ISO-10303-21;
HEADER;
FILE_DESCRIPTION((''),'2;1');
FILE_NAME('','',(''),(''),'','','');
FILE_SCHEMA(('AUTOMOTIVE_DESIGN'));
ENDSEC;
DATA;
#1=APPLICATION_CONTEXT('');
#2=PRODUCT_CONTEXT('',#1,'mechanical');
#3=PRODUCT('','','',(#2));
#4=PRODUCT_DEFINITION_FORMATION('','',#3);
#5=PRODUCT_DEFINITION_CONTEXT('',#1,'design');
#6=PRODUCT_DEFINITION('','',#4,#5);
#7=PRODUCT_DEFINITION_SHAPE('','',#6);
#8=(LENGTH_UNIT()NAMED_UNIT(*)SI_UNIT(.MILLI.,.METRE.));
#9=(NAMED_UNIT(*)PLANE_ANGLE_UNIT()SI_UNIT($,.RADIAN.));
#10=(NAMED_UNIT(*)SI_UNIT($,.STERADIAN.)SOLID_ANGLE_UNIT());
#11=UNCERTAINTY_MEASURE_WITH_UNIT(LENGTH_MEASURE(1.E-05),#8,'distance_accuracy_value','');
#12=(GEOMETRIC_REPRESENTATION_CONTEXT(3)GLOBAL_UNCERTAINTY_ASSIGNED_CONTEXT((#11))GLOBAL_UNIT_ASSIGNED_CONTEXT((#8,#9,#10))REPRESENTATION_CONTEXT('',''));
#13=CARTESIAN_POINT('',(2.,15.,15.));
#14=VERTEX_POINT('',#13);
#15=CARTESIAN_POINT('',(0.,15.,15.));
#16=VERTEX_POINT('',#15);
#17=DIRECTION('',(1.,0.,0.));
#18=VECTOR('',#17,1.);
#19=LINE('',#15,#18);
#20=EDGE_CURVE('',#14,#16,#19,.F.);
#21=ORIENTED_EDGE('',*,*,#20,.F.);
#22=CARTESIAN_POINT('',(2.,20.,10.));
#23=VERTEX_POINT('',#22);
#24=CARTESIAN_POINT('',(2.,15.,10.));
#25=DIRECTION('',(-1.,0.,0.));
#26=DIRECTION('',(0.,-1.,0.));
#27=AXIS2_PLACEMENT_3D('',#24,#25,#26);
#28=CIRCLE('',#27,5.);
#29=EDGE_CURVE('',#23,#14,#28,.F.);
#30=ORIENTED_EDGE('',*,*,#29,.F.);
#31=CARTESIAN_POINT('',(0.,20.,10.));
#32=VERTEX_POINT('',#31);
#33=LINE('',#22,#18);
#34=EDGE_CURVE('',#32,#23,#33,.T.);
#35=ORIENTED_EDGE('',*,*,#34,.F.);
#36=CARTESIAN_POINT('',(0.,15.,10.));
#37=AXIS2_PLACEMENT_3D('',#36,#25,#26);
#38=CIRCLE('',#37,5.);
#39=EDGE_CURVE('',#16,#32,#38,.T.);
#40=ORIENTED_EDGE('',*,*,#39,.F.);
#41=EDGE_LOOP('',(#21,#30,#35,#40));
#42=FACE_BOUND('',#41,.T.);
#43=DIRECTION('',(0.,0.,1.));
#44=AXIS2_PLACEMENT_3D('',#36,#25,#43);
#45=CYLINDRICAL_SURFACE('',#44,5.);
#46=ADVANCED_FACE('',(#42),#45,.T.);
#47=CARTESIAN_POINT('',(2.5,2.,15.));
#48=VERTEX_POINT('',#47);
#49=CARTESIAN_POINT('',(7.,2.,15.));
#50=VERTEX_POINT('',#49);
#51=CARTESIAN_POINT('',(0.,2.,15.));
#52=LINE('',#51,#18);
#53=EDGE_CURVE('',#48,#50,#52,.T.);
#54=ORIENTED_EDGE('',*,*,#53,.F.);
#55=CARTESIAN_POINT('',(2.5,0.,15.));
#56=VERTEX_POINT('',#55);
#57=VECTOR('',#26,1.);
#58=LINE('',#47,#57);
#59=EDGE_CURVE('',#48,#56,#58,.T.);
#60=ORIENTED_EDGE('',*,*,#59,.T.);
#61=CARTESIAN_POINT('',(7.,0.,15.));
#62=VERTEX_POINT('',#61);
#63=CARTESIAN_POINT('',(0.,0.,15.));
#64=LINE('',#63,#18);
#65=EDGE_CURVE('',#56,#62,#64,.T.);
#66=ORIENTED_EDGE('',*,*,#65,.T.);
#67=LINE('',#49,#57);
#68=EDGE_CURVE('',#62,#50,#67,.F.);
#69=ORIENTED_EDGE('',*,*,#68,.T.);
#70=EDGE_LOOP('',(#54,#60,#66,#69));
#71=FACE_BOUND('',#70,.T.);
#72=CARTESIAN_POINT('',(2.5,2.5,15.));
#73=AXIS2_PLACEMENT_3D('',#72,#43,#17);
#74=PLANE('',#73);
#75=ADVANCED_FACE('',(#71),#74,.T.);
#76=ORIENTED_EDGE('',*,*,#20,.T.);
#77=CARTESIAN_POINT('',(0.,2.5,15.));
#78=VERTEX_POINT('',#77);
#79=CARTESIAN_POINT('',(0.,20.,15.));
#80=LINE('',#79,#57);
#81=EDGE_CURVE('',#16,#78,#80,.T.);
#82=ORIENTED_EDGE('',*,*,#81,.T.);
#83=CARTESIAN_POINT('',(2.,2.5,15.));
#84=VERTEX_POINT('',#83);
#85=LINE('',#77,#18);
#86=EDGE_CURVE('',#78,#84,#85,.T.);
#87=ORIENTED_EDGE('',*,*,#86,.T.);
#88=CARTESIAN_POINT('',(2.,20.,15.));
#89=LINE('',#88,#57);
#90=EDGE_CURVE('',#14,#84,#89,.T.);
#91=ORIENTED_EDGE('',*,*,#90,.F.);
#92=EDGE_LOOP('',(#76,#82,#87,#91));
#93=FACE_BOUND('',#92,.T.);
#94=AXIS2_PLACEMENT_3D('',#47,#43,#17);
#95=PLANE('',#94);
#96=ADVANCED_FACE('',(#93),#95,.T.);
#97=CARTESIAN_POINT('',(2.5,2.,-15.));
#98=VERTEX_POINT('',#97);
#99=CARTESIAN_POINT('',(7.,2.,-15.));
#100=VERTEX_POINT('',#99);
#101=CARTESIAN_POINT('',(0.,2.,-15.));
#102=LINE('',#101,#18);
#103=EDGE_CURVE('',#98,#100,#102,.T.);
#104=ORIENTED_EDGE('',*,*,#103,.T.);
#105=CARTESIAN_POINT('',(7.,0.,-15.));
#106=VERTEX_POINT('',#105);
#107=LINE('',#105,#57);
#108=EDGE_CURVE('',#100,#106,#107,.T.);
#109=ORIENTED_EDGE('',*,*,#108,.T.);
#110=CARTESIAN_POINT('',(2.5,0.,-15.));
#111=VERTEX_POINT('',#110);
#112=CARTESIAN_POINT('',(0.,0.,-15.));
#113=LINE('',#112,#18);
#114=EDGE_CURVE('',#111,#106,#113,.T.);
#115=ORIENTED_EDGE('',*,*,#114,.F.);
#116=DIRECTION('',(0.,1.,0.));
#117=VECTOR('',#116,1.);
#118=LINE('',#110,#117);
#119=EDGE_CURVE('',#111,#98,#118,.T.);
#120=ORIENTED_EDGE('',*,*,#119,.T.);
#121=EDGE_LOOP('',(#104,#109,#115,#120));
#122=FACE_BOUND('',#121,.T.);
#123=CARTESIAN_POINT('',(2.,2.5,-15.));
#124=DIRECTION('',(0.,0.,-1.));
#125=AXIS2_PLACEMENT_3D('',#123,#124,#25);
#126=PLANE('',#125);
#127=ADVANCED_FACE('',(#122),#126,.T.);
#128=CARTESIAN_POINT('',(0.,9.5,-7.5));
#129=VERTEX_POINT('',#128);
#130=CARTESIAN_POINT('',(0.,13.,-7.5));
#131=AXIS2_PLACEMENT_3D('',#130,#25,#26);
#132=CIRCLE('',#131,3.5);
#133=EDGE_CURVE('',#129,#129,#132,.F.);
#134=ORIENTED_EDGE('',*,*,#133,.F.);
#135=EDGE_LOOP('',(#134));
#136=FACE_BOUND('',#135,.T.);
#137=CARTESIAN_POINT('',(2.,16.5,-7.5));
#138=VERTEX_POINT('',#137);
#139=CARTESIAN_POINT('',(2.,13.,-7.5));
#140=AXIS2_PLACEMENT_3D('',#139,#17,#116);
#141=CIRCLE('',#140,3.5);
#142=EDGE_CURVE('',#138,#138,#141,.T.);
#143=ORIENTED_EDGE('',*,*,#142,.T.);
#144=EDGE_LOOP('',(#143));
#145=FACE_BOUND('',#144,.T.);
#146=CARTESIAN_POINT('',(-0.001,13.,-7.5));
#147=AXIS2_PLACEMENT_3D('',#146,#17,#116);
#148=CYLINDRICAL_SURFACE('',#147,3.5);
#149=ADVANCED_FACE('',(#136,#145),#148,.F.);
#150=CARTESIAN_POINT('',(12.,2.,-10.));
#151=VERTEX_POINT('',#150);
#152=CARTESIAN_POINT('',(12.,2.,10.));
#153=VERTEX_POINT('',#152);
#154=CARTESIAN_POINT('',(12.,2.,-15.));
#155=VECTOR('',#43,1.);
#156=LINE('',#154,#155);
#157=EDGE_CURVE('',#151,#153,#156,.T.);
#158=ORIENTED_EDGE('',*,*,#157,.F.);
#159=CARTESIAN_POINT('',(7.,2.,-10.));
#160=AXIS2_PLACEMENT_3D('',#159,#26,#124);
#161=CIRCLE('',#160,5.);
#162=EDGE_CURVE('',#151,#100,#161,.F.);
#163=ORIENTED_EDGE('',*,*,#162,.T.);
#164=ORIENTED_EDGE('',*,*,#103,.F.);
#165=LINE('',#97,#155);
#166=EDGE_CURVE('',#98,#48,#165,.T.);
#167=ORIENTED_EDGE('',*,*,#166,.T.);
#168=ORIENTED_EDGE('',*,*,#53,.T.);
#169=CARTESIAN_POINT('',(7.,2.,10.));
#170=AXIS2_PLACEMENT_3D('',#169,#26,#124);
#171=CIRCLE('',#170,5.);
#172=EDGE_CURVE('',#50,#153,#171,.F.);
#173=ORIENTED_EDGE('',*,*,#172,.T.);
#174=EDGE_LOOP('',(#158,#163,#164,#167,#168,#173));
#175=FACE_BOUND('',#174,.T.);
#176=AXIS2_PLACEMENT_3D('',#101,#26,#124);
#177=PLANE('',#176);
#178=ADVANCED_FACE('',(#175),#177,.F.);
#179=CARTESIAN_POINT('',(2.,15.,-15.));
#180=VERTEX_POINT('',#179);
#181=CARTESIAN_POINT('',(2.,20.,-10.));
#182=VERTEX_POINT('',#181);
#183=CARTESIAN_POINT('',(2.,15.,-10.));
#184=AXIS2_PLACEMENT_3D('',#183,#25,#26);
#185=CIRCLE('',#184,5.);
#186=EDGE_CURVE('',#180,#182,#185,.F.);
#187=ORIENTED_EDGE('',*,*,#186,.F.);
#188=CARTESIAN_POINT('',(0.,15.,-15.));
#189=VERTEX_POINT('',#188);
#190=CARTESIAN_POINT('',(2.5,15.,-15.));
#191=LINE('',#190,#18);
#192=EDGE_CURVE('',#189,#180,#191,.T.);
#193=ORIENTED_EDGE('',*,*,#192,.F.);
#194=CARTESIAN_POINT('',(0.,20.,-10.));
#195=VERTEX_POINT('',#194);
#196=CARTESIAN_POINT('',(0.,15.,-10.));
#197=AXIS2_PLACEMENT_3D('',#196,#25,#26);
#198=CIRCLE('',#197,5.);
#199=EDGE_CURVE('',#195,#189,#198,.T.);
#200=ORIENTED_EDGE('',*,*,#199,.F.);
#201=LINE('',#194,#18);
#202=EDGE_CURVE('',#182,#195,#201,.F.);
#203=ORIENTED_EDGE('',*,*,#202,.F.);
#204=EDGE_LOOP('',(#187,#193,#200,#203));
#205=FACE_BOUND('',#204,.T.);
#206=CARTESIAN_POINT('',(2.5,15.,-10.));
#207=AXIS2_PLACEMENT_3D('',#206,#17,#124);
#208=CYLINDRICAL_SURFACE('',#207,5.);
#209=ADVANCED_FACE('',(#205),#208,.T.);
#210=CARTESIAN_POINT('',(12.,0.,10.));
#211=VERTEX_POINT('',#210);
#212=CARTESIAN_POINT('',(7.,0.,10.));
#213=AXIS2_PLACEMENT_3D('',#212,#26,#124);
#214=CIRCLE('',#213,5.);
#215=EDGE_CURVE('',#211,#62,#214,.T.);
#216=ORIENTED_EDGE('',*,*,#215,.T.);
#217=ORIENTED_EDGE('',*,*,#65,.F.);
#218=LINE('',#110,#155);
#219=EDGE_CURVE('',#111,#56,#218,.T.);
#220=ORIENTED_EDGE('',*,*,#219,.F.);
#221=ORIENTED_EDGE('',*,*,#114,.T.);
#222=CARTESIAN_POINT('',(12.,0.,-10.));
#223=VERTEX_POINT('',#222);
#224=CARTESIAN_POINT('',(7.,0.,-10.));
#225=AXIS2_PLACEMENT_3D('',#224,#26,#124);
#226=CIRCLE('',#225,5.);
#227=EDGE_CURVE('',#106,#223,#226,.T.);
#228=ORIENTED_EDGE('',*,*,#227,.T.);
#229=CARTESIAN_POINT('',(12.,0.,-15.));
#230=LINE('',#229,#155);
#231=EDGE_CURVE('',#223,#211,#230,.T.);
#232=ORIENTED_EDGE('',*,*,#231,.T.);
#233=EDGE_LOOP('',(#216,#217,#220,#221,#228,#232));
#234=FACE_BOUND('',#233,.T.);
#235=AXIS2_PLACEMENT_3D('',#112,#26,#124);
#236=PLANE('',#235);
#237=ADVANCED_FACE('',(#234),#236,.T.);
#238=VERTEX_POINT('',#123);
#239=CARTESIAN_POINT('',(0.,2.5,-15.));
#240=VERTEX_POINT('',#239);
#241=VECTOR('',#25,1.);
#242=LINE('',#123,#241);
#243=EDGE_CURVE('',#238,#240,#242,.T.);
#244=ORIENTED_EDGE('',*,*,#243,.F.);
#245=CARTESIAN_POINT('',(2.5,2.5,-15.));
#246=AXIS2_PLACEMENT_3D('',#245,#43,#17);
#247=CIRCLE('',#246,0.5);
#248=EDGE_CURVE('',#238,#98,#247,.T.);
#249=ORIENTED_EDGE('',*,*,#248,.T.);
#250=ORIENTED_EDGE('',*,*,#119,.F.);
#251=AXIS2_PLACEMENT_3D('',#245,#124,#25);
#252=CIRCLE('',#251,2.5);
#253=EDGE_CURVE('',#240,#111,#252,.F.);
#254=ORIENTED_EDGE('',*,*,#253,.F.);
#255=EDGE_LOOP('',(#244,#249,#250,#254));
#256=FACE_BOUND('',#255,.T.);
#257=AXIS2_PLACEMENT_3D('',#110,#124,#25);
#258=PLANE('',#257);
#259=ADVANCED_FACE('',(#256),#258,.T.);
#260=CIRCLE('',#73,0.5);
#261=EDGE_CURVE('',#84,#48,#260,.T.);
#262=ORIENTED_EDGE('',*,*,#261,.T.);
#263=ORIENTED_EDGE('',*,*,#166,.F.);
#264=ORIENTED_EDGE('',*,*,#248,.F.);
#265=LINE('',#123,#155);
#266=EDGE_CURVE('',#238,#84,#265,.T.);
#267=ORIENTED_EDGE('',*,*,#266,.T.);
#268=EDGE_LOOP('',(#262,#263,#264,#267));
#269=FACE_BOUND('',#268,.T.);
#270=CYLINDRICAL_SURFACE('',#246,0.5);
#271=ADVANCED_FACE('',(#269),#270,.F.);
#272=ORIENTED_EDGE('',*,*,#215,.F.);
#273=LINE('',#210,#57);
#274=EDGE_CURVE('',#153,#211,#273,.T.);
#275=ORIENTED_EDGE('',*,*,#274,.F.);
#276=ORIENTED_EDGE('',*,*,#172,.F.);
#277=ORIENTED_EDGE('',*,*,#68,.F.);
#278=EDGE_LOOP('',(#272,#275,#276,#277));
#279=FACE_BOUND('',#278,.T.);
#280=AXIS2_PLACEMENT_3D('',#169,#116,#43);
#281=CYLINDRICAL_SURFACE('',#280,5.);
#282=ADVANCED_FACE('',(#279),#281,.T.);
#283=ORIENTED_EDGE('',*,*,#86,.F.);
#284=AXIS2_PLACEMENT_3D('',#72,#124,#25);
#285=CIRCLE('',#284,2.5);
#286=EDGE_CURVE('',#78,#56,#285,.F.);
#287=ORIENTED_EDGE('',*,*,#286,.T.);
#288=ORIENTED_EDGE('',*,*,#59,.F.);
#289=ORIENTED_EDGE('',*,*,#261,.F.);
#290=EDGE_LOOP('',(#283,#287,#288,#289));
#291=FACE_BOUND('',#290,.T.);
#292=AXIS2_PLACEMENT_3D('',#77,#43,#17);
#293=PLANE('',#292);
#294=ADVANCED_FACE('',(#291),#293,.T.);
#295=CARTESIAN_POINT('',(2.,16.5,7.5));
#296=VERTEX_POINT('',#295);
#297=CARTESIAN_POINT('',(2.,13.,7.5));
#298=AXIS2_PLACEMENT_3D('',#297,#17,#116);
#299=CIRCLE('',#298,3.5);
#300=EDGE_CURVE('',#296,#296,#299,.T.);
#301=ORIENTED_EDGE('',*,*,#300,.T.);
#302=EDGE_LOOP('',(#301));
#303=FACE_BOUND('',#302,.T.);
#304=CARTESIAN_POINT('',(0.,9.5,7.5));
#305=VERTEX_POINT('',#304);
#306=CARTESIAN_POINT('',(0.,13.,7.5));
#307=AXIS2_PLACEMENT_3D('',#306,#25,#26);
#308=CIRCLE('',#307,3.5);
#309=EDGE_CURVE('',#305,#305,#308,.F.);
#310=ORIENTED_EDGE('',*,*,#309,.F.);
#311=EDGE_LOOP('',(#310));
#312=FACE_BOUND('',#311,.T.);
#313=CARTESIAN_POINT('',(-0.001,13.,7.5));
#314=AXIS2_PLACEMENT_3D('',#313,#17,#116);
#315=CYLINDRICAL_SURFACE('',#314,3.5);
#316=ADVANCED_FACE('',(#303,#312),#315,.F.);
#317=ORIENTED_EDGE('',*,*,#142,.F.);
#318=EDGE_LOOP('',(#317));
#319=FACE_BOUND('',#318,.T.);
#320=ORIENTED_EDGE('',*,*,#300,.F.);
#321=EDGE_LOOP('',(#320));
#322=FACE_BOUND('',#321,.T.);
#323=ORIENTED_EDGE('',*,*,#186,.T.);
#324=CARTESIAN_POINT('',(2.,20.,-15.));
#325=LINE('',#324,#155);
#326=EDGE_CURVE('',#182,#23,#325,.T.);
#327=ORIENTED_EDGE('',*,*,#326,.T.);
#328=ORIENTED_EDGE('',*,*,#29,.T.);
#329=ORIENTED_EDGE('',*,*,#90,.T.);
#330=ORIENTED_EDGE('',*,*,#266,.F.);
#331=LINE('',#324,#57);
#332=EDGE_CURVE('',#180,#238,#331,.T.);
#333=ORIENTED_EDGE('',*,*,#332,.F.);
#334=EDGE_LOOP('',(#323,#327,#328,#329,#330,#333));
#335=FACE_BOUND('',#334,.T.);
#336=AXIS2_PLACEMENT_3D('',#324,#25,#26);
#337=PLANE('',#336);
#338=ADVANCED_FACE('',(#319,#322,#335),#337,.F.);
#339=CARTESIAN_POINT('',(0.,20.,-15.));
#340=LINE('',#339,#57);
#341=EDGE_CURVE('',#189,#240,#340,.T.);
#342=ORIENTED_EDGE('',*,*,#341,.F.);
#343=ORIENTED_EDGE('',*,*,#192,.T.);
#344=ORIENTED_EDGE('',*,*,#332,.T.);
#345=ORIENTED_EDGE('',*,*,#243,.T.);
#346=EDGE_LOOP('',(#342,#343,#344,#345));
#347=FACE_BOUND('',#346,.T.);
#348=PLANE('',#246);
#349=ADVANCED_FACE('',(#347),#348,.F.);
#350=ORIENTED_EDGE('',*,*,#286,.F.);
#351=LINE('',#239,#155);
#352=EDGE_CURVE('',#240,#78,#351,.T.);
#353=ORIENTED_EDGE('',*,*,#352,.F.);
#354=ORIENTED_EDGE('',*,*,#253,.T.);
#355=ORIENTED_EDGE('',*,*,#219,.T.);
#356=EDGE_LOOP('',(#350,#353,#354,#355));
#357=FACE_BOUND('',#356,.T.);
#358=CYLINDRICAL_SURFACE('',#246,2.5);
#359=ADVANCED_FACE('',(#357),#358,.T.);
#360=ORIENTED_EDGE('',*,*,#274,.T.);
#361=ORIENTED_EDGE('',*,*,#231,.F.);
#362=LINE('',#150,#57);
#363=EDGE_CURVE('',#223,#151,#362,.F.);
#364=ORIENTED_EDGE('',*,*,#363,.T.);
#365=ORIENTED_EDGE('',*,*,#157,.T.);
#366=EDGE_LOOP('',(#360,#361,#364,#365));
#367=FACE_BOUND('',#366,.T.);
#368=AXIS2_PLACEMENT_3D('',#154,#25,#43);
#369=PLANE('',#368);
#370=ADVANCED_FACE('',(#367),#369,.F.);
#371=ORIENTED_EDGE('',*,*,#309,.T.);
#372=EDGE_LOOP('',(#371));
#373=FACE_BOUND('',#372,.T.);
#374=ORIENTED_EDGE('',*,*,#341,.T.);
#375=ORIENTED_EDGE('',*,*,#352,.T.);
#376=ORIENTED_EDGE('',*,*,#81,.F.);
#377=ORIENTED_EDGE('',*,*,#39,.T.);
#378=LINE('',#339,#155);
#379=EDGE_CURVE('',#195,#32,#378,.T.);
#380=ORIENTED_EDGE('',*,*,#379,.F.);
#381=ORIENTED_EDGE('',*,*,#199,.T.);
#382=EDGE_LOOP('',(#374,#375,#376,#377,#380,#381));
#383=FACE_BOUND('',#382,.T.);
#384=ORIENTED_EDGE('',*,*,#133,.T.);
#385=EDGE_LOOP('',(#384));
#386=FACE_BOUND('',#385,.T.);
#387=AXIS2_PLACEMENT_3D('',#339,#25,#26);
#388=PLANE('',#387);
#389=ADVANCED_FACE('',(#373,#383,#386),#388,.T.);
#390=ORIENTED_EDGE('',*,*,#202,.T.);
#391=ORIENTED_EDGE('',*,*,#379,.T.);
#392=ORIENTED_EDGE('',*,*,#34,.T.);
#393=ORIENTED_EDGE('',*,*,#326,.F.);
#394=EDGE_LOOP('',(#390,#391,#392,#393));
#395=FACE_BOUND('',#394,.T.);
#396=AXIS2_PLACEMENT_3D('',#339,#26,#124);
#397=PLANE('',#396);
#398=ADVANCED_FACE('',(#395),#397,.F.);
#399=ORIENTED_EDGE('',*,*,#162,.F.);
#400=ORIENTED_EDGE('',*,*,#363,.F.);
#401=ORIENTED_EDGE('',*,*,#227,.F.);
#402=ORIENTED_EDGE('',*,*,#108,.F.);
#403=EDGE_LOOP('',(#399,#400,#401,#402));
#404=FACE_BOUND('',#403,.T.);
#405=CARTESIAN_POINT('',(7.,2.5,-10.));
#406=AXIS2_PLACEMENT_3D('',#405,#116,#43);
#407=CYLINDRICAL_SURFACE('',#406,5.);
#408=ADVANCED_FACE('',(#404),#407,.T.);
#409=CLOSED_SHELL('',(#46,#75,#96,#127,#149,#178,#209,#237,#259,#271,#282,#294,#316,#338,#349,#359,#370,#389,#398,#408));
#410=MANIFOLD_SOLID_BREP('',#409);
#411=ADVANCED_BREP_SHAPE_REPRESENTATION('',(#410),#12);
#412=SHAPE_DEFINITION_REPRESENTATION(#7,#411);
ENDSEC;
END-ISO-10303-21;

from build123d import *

# Parameters (mm, degrees)
SM_BASE_FLANGE_1_DEPTH = 15
CUT_EXTRUDE_1_REACH    = 28.926
SKETCH_3_R             = 3.5
FILLET_1_R             = 5


# Sheet-metal steps are written as plain solids
with BuildPart() as part:
    # Sketch 1 → 基体-法兰1 (new, symmetric)
    with BuildSketch(Plane.XY):
        with BuildLine():
            Line((0, 20), (0, 2.5))
            ThreePointArc((0, 2.5), (0.732233047, 0.732233047), (2.5, 0))
            Line((2.5, 0), (12, 0))
            Line((12, 0), (12, 2))
            Line((12, 2), (2.5, 2))
            ThreePointArc((2.5, 2), (2.146446609, 2.146446609), (2, 2.5))
            Line((2, 2.5), (2, 20))
            Line((2, 20), (0, 20))
        make_face()
    extrude(amount=SM_BASE_FLANGE_1_DEPTH, both=True)

    # 草图3 → 切除-拉伸1 (cut, up to next)
    with BuildSketch(Plane(origin=(2, 0, 0), x_dir=(0, 0, -1), z_dir=(1, 0, 0)), mode=Mode.PRIVATE) as cut_extrude_1_sk1:
        with Locations(Location((-7.5, 13, 0), (0, 0, 90))):
            Circle(SKETCH_3_R)
    cut_extrude_1_tool1 = extrude(cut_extrude_1_sk1.sketch, amount=-CUT_EXTRUDE_1_REACH, mode=Mode.PRIVATE) & part.part
    # 草图3 → 切除-拉伸1 (cut, up to next)
    with BuildSketch(Plane(origin=(2, 0, 0), x_dir=(0, 0, -1), z_dir=(1, 0, 0)), mode=Mode.PRIVATE) as cut_extrude_1_sk2:
        with Locations(Location((7.5, 13, 0), (0, 0, 90))):
            Circle(SKETCH_3_R)
    cut_extrude_1_tool2 = extrude(cut_extrude_1_sk2.sketch, amount=-CUT_EXTRUDE_1_REACH, mode=Mode.PRIVATE) & part.part
    add(cut_extrude_1_tool1.solids().sort_by_distance((2, 13, 7.5))[0], mode=Mode.SUBTRACT)
    add(cut_extrude_1_tool2.solids().sort_by_distance((2, 13, -7.5))[0], mode=Mode.SUBTRACT)

    # 圆角1
    fillet_1_edges = [part.edges().sort_by_distance(p)[0] for p in [
        (1, 20, -15),
        (12, 1, -15),
        (1, 20, 15),
        (12, 1, 15),
    ]]
    fillet(fillet_1_edges, radius=FILLET_1_R)


solid = part.part
